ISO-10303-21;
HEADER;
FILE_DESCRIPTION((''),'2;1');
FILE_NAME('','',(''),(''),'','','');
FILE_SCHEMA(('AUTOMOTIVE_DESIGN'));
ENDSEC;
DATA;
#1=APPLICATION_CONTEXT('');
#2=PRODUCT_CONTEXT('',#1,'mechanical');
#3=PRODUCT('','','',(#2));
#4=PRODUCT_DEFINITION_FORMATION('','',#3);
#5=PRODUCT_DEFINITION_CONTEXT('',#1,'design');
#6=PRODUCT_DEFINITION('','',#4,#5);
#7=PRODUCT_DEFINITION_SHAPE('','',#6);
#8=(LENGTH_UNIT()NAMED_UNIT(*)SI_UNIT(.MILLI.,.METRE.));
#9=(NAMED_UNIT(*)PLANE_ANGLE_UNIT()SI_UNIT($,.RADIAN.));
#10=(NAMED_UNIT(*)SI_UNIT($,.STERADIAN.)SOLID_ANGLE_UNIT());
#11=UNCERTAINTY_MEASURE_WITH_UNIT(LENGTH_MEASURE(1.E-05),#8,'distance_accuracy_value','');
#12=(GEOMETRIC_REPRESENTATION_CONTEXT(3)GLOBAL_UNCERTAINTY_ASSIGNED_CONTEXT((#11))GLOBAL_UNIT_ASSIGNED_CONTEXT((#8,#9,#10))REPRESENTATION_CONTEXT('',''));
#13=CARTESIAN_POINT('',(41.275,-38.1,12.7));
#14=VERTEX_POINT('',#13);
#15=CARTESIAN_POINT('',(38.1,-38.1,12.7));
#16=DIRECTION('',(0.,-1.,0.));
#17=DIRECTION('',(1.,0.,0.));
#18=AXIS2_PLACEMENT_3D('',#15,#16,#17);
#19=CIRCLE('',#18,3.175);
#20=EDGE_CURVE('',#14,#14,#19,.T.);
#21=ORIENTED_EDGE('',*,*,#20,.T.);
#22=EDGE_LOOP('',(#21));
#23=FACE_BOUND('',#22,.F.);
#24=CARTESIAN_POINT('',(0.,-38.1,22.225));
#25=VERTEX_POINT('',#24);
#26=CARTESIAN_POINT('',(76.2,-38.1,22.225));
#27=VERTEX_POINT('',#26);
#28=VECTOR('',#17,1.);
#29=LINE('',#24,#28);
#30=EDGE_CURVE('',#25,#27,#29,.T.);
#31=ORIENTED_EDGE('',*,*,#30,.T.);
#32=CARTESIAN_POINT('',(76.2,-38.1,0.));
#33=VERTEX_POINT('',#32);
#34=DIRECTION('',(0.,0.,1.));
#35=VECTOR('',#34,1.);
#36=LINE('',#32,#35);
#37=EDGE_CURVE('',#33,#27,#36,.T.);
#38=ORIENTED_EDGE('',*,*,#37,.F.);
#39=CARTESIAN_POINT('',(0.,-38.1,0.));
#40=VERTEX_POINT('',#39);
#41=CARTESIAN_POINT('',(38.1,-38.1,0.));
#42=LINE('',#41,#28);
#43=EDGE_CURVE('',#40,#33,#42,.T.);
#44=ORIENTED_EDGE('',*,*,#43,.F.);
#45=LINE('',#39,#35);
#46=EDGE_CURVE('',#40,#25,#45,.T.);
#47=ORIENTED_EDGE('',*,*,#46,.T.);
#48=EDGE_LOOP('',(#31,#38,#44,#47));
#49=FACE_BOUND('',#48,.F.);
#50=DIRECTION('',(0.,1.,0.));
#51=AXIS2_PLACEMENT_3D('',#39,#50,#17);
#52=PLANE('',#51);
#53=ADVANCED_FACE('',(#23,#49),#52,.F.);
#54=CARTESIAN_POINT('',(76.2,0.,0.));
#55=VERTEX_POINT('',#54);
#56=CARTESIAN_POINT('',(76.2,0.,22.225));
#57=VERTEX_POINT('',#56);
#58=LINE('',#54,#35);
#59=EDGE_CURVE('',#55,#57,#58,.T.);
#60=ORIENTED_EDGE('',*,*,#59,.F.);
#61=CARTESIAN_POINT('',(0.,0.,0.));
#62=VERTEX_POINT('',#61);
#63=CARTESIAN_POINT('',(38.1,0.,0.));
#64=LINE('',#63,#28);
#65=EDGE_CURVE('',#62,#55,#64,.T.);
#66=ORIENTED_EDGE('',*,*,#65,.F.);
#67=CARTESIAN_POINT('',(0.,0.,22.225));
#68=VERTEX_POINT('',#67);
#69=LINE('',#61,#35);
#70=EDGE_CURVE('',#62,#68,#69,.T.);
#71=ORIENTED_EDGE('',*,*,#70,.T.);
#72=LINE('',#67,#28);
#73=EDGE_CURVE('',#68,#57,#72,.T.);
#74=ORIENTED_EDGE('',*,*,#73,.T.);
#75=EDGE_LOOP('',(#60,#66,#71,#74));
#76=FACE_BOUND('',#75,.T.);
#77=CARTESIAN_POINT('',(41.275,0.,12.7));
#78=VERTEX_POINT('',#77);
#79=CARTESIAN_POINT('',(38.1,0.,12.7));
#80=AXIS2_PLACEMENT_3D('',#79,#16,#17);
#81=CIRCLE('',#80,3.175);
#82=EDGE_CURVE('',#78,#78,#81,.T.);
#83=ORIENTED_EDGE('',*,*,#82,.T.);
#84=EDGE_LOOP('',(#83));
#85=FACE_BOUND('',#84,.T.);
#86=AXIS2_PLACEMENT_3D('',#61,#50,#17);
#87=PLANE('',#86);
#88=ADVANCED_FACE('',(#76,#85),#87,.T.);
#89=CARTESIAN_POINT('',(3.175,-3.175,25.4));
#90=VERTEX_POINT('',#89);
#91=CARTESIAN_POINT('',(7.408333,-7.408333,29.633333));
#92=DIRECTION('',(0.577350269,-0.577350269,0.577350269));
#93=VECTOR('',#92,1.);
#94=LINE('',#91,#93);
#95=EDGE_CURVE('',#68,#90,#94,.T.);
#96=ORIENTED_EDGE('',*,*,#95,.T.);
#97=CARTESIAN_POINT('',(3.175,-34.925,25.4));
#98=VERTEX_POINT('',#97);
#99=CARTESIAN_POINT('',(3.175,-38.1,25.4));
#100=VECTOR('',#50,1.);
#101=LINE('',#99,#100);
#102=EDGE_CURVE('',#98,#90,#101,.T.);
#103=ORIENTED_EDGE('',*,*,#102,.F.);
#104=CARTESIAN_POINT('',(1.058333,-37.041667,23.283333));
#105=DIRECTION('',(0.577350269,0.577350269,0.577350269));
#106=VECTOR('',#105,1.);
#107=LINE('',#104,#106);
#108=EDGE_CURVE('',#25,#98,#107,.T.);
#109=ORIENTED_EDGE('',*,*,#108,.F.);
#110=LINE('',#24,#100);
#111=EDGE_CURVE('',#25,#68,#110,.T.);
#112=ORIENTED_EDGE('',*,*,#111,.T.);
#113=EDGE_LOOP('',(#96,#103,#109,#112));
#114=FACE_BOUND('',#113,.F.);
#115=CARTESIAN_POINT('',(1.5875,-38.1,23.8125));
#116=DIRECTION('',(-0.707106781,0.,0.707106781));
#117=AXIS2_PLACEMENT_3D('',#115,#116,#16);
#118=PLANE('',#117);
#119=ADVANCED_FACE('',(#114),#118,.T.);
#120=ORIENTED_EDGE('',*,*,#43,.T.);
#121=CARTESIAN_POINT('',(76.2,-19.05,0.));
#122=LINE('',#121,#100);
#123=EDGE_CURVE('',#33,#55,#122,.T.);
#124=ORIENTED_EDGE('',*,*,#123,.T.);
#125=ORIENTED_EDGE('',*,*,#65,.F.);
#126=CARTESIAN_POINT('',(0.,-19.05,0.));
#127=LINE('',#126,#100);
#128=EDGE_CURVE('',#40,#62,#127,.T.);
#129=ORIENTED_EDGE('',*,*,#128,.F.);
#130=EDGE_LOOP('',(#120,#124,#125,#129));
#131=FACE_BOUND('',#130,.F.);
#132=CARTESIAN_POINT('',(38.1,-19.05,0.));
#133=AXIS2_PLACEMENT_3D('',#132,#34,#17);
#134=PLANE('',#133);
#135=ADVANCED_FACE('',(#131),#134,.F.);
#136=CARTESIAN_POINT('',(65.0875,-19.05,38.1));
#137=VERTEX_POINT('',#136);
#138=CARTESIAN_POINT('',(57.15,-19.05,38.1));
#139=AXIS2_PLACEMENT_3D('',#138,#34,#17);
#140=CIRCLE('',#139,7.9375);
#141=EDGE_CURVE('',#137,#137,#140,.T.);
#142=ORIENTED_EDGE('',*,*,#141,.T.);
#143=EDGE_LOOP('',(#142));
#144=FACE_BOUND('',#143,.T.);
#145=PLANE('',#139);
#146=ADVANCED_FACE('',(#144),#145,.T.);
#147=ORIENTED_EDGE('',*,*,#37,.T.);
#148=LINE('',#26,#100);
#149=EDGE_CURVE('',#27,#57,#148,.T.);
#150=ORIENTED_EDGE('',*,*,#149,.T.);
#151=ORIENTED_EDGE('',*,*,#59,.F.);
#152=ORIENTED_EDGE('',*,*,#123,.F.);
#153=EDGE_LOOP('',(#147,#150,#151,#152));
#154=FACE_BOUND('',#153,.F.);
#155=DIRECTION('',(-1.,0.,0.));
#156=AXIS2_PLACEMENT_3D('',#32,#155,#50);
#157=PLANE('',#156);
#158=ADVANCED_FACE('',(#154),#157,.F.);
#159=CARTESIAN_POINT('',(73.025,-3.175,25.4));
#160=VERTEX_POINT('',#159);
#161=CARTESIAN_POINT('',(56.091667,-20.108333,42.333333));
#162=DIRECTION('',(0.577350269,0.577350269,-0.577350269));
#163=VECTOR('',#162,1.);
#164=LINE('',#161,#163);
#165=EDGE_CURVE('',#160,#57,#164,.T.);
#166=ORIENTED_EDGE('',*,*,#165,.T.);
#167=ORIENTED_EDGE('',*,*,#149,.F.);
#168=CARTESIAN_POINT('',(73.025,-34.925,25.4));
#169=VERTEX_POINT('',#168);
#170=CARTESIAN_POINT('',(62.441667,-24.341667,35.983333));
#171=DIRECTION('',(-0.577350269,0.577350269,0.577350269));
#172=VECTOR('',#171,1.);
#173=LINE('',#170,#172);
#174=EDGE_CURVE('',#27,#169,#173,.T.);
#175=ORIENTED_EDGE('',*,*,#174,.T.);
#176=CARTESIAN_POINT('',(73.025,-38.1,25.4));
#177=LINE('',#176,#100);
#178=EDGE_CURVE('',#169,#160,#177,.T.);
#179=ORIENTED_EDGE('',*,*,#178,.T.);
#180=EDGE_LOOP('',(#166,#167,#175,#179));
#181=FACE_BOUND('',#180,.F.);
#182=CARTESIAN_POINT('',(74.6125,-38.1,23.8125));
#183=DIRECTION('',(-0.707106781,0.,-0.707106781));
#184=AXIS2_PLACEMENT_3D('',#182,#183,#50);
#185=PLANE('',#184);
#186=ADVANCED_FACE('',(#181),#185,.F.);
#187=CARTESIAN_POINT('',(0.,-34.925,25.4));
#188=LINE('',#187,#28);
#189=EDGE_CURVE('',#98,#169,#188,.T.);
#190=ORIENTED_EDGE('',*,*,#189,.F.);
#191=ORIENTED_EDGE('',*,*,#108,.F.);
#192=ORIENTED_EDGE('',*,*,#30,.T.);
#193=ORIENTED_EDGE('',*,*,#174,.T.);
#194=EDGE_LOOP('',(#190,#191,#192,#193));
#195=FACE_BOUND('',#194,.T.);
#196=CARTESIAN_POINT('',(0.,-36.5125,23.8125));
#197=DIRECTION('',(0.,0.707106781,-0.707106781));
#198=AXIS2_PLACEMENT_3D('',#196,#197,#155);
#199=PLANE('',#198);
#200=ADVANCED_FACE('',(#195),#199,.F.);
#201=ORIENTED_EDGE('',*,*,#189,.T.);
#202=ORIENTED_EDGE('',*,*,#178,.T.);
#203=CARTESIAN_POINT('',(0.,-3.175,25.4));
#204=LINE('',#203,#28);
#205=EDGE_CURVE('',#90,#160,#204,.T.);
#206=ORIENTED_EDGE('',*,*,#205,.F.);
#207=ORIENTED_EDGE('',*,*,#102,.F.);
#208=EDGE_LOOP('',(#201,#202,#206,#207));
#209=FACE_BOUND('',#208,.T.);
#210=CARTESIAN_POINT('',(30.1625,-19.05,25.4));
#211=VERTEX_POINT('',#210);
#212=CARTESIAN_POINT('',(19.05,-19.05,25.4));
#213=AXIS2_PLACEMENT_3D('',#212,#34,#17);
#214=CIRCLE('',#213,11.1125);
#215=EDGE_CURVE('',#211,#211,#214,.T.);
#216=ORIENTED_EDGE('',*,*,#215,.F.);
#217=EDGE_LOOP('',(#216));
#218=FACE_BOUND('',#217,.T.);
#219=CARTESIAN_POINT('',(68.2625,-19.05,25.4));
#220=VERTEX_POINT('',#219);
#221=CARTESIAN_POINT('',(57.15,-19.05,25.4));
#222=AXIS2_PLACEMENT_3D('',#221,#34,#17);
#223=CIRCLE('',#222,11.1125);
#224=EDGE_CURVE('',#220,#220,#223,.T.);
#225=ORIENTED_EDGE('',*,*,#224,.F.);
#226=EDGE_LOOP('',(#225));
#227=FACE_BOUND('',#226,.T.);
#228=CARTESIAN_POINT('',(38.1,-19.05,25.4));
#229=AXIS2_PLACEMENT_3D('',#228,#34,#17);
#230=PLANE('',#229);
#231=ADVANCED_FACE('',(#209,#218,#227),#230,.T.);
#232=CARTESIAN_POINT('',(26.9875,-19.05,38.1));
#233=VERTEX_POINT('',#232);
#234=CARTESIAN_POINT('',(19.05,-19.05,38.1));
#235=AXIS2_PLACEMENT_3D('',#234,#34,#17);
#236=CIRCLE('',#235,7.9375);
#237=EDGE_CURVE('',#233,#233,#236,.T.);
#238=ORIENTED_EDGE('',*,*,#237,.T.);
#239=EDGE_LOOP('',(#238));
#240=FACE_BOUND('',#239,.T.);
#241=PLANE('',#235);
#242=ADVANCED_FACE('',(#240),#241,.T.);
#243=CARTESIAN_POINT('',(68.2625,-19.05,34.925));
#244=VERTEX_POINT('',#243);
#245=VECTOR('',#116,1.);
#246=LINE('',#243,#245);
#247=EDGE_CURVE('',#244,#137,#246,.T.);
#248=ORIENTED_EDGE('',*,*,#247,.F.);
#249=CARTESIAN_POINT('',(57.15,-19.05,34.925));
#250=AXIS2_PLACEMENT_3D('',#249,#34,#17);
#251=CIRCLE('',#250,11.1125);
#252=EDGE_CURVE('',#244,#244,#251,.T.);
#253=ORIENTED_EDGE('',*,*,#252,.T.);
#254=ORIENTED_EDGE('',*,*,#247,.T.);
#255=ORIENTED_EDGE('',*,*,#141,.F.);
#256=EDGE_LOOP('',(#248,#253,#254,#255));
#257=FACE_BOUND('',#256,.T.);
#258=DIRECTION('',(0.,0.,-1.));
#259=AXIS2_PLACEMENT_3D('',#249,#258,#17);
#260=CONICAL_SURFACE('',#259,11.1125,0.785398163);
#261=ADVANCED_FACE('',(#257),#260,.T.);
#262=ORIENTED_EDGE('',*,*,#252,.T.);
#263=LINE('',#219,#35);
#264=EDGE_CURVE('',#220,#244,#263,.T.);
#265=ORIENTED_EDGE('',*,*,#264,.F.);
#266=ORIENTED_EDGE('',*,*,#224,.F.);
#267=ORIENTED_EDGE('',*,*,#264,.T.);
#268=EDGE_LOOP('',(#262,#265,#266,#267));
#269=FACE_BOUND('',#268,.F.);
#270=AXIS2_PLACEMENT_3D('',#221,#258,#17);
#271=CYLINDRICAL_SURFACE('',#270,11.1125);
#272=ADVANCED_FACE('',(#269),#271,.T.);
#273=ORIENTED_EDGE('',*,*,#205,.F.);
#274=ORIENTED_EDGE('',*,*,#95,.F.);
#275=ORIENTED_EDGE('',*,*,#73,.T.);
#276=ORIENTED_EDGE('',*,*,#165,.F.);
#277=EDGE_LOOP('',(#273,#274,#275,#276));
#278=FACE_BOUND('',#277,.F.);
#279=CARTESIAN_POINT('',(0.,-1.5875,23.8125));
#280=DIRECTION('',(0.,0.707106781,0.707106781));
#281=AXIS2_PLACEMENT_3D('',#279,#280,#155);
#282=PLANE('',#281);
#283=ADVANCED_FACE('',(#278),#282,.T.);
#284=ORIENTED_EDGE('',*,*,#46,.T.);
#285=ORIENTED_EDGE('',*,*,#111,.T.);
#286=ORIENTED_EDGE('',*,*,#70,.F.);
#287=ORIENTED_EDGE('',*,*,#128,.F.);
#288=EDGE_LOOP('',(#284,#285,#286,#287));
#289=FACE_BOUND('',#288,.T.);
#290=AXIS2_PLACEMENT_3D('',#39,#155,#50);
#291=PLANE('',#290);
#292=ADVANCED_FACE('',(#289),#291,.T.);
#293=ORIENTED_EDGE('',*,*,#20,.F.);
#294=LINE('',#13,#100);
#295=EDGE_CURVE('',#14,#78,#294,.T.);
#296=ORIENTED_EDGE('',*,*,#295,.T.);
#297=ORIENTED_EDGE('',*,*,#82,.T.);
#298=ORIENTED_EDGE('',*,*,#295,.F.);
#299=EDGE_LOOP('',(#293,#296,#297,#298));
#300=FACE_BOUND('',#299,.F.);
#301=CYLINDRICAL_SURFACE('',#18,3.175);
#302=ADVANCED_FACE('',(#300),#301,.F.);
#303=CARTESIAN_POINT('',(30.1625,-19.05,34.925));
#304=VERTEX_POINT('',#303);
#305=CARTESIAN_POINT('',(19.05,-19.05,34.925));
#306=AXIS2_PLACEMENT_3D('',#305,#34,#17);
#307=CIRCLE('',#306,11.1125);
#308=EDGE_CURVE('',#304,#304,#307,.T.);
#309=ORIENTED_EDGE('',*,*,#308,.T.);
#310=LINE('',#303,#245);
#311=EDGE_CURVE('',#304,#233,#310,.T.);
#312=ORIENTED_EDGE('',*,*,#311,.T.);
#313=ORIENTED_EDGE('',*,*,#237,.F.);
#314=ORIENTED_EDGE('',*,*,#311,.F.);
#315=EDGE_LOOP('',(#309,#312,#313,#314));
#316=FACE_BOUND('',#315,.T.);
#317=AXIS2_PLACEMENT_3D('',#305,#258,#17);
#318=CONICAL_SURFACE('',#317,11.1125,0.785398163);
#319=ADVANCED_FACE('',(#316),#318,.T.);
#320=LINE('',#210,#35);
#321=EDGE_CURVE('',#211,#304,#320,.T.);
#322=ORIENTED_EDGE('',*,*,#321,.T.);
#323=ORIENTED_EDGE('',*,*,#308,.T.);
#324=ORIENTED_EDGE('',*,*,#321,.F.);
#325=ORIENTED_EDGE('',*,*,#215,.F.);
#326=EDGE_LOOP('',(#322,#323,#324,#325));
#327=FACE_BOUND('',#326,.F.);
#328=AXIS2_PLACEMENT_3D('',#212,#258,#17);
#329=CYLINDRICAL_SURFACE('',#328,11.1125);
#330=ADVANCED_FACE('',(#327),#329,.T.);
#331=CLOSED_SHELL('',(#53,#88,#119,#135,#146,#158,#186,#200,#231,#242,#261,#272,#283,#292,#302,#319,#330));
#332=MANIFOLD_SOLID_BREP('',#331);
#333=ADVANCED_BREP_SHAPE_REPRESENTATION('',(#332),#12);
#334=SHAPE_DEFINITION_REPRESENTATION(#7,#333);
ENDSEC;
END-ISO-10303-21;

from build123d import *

# Parameters (mm, degrees)
F0_W          = 76.2
F0_H          = 38.1
F1_DEPTH      = 25.4
F2_R          = 11.1125
F3_DEPTH      = 12.7
F4_R          = 3.175
F5_DEPTH      = 38.101
F5_DEPTH_BACK = 139
F6_SIZE       = 3.175


# Not quite as in the source:
# - an extrude ends at something that could not be found from the text; its depth is read off the source's solid


with BuildPart() as f1:
    # F0 (on Top) → F1 (new body)
    with BuildSketch(Plane.XY):
        with Locations((38.1, -19.05)):
            Rectangle(F0_W, F0_H)
    extrude(amount=F1_DEPTH)

    # F2 (on face) → F3 (join)
    with BuildSketch(Plane.XY.offset(25.4)):
        with Locations((19.05, -19.05)):
            Circle(F2_R)
        with Locations((57.15, -19.05)):
            Circle(F2_R)
    extrude(amount=F3_DEPTH)

    # F4 (on face) → F5 (cut, two sides)
    with BuildSketch(Plane.XZ.offset(38.1)) as f5_sk:
        with Locations((38.1, 12.7)):
            Circle(F4_R)
    extrude(amount=-F5_DEPTH, mode=Mode.SUBTRACT)
    extrude(f5_sk.sketch, amount=F5_DEPTH_BACK, mode=Mode.SUBTRACT)

    # F6
    f6_edges = [f1.edges().sort_by_distance(p)[0] for p in [
        (46.0375, -19.05, 38.1),
        (7.9375, -19.05, 38.1),
        (38.1, -38.1, 25.4),
        (76.2, -19.05, 25.4),
        (38.1, 0, 25.4),
        (0, -19.05, 25.4),
    ]]
    chamfer(f6_edges, length=F6_SIZE)


solid = f1.part
